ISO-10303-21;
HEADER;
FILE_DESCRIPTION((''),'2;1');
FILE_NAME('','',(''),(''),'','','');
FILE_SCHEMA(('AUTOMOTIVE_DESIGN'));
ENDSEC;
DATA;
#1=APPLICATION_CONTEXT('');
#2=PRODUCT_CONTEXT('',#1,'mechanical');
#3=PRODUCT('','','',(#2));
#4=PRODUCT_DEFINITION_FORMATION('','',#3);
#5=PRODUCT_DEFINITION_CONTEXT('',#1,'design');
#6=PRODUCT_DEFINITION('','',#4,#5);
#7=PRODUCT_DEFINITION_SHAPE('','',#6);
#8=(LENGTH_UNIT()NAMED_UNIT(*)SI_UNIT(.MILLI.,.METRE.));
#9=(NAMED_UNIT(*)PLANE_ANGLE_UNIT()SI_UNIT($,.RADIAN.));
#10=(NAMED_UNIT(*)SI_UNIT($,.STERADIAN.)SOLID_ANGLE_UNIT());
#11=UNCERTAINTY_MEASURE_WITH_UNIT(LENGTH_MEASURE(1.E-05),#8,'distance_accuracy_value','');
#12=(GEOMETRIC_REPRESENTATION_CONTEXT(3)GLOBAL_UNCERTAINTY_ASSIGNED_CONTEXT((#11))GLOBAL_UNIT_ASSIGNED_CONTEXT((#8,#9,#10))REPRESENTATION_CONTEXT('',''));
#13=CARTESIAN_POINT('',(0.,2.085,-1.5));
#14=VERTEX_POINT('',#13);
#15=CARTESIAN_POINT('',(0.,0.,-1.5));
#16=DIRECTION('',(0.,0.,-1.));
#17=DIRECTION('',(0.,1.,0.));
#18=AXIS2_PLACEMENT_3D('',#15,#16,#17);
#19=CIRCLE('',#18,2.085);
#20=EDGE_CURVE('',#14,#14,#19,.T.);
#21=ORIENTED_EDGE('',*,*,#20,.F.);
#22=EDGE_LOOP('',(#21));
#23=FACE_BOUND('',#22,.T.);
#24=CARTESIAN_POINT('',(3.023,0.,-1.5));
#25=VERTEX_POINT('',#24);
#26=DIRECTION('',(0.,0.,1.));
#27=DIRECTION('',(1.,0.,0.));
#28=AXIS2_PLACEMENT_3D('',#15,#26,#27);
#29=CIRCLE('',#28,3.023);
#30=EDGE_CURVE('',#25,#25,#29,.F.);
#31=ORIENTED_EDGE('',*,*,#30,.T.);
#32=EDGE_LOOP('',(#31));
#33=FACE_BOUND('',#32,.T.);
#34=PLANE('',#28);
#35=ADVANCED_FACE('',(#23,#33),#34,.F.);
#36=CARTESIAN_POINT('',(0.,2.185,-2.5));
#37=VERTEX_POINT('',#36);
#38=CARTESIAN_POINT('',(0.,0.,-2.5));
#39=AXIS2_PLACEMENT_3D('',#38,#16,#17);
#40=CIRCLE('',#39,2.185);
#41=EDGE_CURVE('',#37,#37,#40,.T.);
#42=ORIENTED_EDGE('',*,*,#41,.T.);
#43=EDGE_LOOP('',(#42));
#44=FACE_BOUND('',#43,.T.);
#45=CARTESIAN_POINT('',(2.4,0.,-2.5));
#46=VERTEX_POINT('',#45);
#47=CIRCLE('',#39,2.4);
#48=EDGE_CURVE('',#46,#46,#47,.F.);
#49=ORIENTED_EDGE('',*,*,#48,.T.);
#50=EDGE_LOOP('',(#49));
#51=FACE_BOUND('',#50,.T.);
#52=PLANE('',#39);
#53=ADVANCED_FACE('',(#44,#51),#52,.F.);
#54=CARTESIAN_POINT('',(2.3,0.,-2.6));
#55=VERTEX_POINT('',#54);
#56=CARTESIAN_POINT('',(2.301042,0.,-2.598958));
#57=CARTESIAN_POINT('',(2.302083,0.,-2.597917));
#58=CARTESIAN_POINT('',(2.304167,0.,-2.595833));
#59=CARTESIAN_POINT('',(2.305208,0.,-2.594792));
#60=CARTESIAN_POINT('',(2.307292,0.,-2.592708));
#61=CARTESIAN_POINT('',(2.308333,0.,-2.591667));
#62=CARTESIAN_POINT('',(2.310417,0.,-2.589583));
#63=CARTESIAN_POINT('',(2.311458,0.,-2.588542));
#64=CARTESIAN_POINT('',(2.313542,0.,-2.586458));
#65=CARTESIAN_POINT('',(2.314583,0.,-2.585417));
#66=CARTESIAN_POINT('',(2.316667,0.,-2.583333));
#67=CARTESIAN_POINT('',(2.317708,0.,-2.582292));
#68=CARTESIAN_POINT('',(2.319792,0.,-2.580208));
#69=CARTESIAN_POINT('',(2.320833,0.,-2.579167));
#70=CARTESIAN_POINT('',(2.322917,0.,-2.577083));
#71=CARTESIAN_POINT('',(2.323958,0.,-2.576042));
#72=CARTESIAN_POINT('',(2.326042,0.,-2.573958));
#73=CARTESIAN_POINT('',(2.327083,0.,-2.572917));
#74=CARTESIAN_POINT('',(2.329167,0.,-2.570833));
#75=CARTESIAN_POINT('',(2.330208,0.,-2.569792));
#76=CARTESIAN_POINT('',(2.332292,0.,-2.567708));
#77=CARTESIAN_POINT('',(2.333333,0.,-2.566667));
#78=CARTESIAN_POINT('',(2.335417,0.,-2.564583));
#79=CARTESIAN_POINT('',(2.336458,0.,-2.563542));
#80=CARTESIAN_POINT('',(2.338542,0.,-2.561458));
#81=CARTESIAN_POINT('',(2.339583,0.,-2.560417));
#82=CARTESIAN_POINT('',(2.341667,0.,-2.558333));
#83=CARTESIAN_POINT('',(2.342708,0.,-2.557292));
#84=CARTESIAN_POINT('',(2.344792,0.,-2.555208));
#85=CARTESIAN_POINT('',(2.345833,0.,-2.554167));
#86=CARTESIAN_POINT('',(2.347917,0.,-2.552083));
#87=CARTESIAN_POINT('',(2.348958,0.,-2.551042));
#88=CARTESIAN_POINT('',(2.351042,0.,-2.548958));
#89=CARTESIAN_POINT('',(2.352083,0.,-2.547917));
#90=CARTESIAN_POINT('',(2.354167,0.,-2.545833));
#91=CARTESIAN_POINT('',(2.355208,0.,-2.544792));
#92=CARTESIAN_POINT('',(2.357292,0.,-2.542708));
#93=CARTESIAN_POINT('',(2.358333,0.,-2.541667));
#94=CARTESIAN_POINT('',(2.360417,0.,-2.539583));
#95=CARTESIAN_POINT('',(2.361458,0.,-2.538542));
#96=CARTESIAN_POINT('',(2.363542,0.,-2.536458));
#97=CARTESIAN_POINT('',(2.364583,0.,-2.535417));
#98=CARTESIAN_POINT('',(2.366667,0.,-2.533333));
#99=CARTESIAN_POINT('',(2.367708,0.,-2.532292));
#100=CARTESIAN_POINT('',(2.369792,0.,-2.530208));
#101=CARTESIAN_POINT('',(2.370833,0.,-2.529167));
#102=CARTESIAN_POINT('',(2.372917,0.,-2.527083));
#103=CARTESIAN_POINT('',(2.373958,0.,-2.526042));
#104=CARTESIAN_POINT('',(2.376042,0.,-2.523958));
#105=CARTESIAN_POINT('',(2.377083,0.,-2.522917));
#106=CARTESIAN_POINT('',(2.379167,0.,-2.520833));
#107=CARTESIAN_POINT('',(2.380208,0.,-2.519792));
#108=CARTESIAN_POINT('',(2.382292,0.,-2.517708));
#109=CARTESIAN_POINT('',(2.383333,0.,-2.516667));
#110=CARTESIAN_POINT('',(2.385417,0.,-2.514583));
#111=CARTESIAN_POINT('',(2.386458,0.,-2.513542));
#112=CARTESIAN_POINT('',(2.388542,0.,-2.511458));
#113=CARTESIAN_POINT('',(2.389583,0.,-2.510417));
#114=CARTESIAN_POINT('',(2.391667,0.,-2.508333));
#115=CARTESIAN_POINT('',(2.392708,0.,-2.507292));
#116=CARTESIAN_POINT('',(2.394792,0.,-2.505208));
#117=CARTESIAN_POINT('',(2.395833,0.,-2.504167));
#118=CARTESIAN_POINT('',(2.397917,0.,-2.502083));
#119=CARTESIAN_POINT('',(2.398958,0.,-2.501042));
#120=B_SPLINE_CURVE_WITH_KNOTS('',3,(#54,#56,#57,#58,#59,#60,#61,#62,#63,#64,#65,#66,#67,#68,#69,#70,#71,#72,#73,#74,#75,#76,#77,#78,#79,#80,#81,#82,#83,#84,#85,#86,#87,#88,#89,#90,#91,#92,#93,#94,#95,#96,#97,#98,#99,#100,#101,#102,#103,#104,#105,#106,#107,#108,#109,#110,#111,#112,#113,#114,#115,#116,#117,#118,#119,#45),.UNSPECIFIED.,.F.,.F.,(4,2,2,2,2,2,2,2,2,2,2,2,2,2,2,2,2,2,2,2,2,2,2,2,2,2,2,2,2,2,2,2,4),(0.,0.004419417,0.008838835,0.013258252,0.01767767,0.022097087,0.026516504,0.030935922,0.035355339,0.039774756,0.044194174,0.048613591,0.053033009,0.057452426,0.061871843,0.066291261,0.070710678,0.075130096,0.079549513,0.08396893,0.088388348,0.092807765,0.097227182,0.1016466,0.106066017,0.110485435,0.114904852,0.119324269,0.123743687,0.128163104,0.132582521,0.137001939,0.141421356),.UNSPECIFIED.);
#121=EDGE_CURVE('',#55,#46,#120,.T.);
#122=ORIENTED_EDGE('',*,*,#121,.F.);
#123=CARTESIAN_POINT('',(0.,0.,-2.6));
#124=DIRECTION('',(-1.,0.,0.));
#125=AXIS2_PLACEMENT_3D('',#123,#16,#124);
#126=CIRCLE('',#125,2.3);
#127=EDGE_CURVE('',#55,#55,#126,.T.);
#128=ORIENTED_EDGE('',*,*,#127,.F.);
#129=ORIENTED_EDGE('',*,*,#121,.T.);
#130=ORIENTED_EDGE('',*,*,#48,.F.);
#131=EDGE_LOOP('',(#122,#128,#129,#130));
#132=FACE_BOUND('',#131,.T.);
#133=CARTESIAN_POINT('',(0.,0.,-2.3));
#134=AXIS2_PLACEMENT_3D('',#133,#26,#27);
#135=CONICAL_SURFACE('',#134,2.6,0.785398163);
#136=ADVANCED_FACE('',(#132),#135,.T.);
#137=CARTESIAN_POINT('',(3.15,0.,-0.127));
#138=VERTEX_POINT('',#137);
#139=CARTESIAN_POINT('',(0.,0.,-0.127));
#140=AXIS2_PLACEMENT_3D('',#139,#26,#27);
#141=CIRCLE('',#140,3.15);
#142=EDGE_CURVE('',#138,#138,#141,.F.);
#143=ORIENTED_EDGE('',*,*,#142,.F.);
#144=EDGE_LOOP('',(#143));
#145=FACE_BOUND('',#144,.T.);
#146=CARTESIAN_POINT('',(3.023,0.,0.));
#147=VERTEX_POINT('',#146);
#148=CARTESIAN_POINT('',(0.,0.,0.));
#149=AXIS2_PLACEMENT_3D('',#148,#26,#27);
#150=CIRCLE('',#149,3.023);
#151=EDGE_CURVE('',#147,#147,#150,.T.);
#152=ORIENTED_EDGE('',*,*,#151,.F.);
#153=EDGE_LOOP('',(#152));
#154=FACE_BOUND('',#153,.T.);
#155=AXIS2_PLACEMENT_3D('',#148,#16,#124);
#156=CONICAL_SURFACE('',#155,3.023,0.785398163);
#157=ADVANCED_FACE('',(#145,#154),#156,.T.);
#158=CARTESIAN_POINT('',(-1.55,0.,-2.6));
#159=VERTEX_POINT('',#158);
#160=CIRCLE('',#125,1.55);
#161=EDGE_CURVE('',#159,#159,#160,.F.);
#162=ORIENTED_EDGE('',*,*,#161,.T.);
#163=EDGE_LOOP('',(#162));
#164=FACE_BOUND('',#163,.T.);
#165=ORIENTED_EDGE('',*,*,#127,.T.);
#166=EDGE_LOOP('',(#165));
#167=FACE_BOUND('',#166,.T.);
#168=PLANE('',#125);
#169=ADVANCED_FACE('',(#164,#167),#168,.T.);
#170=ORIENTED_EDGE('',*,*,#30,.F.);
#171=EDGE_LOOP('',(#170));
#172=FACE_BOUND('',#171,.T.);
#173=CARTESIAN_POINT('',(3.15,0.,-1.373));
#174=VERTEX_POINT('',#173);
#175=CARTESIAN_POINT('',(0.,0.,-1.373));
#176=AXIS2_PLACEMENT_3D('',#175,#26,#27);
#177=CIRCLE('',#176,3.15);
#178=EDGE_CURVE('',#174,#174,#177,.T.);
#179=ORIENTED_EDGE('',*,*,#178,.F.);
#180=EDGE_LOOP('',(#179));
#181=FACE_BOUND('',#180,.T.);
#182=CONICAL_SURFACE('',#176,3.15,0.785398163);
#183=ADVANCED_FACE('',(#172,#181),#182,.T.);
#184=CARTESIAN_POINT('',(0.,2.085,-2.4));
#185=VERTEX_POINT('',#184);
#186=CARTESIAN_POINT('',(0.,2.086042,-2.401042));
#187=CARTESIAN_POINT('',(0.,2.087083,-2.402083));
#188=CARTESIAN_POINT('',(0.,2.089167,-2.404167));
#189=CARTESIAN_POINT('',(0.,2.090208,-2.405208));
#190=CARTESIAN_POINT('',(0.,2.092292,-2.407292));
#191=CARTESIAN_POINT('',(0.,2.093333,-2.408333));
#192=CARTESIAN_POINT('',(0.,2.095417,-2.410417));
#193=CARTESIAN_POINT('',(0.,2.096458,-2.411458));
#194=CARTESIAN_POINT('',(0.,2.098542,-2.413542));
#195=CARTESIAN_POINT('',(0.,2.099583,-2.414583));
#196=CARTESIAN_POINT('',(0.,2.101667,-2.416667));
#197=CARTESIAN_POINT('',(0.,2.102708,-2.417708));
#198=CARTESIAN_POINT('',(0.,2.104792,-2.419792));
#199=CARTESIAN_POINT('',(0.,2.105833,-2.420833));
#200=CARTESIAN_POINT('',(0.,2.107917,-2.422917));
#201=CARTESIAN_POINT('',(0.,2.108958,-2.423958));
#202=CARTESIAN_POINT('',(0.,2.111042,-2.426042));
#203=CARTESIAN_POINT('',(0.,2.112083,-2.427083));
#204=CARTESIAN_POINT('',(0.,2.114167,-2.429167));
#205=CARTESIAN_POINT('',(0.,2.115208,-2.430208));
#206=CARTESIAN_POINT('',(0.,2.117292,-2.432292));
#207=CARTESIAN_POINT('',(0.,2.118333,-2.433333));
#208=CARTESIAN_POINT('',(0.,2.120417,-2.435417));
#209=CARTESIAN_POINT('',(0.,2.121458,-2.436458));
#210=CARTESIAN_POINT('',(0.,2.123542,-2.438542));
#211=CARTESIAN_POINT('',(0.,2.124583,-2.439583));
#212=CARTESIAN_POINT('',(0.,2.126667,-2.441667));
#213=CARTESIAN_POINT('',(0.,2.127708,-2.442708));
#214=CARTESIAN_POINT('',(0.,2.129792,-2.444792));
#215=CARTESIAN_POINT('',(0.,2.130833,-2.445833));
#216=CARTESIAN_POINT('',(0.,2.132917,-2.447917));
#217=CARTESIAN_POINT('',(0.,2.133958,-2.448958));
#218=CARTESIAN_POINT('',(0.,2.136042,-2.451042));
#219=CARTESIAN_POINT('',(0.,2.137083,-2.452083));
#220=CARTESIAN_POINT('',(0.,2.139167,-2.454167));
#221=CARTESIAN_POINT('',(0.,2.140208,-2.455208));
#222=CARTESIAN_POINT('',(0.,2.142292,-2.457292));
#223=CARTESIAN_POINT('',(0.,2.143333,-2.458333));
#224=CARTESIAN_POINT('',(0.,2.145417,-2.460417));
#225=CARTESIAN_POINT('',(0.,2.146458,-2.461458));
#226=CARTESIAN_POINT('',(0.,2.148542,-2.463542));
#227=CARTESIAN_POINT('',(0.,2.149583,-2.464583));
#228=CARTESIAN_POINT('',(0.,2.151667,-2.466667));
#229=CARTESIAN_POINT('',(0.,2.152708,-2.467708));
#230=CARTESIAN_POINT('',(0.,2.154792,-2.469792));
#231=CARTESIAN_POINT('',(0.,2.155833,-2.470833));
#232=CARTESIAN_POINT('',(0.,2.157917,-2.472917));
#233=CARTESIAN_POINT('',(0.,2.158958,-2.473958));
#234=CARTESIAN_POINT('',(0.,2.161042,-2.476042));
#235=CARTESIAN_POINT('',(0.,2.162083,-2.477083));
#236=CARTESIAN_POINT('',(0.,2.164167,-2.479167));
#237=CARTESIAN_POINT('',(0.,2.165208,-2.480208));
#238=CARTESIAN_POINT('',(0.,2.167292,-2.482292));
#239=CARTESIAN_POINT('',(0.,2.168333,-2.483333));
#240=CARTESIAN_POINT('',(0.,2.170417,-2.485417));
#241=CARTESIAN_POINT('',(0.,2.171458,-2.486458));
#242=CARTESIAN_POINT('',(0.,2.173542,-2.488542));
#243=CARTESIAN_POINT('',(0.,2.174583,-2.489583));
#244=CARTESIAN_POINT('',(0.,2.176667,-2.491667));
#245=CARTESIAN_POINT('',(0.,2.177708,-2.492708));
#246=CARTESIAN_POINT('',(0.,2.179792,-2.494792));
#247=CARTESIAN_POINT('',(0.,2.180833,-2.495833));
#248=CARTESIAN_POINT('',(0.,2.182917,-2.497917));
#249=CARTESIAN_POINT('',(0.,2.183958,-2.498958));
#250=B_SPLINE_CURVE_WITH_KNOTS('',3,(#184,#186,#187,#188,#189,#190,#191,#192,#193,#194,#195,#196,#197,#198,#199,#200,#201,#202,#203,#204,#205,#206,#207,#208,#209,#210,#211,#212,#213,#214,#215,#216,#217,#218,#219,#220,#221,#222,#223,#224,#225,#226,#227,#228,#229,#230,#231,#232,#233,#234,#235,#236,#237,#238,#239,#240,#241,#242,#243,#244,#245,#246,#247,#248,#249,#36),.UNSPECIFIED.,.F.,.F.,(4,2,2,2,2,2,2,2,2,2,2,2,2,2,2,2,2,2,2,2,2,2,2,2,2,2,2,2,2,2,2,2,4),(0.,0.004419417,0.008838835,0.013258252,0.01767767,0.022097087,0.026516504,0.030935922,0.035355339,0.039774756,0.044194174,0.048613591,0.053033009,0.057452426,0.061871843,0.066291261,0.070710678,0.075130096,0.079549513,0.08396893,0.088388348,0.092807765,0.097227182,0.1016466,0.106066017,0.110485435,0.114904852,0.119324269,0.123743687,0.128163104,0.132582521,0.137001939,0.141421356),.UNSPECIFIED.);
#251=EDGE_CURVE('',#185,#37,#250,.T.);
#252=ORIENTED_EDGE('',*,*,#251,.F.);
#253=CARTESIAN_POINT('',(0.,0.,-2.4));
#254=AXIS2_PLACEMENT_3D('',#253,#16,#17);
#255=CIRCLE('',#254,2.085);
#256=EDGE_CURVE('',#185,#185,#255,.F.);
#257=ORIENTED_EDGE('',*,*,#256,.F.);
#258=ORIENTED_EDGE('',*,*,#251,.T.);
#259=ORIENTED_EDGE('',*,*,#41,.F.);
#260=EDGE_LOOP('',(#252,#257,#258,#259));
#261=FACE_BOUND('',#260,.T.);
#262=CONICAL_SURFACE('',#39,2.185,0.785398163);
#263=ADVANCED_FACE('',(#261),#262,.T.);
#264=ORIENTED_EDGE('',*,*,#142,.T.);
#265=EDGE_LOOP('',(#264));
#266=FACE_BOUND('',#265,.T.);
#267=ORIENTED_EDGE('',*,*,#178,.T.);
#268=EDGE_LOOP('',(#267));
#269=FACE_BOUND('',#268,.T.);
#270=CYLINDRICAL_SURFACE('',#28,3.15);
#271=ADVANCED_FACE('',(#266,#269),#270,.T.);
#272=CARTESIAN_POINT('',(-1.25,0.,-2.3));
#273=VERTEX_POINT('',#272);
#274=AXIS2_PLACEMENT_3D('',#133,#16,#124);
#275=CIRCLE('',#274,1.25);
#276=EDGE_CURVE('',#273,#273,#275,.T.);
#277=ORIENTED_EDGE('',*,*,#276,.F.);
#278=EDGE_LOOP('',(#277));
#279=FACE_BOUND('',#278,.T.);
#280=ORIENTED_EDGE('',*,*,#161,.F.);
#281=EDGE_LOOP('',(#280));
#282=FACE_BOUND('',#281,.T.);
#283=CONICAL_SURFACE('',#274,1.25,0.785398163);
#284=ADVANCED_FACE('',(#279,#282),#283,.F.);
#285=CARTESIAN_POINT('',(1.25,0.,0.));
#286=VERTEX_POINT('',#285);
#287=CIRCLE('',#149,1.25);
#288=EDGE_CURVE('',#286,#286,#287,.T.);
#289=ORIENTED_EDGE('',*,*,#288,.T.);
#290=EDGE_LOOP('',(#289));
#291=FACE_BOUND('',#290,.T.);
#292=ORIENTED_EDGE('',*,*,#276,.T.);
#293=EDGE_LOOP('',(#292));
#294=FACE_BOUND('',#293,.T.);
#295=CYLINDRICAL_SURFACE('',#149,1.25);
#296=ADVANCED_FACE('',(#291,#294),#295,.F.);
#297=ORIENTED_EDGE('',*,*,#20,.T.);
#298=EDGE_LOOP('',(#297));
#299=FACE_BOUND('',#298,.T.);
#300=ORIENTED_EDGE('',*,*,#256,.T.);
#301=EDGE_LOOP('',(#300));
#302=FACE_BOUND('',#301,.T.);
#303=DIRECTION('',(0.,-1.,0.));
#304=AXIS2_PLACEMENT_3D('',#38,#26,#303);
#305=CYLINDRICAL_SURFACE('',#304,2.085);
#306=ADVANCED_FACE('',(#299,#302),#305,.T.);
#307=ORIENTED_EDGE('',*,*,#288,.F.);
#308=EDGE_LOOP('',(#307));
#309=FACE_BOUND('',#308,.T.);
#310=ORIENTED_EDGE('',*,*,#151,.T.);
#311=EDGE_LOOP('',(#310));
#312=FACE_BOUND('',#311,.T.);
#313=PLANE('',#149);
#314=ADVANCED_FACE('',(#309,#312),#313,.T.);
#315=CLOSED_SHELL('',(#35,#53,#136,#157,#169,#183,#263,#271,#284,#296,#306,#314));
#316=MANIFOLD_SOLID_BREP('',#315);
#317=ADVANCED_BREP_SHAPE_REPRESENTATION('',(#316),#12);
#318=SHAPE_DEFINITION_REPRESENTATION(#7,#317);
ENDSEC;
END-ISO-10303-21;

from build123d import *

# Parameters (mm, degrees)
SKETCH1_R           = 3.15
EXTRUDE1_DEPTH      = 1.5
SKETCH2_R           = 2.2051
EXTRUDE2_DEPTH      = 1.1
CHAMFER2_SIZE       = 0.127
SKETCH_2_R          = 2.6
EXTRUDE_1_DEPTH     = 2.6
SKETCH_1_R          = 1.25
CUT_EXTRUDE_1_DEPTH = 10
SKETCH_3_R          = 2.75
SKETCH_3_R_2        = 2.085
CUT_EXTRUDE_2_DEPTH = 1
CHAMFER_2_SIZE      = 0.1
CHAMFER_3_SIZE      = 0.3
CHAMFER_4_SIZE      = 0.3
SKETCH_6_R          = 1.25
EXTRUDE_2_DEPTH     = 3.2
HOLE_WIZARD_M31_D   = 2.5


with BuildPart() as part:
    # Sketch1 → Extrude1 (new body)
    with BuildSketch(Plane.XY):
        Circle(SKETCH1_R)
    extrude(amount=-EXTRUDE1_DEPTH)

    # Sketch2 → Extrude2 (add)
    with BuildSketch(Plane(origin=(0, 0, -1.5), x_dir=(-1, 0, 0), z_dir=(0, 0, -1))):
        with Locations(Location((0, 0, 0), (0, 0, 180))):
            Circle(SKETCH2_R)
    extrude(amount=EXTRUDE2_DEPTH)

    # Chamfer2
    chamfer2_edges = [part.edges().sort_by_distance(p)[0] for p in [
        (-3.15, 0, 0),
        (-3.15, 0, -1.5),
    ]]
    chamfer(chamfer2_edges, length=CHAMFER2_SIZE)

    # Эскиз2 → Бобышка-Вытянуть1 (add)
    with BuildSketch(Plane.XY):
        Circle(SKETCH_2_R)
    extrude(amount=-EXTRUDE_1_DEPTH)

    # Эскиз1 → Вырез-Вытянуть1 (cut)
    with BuildSketch(Plane.XY):
        Circle(SKETCH_1_R)
    extrude(amount=-CUT_EXTRUDE_1_DEPTH, mode=Mode.SUBTRACT)

    # Эскиз3 → Вырез-Вытянуть2 (cut)
    with BuildSketch(Plane(origin=(0, 0, -1.5), x_dir=(-1, 0, 0), z_dir=(0, 0, -1))):
        Circle(SKETCH_3_R)
        with Locations(Location((0, 0, 0), (0, 0, 90))):
            Circle(SKETCH_3_R_2, mode=Mode.SUBTRACT)
    extrude(amount=CUT_EXTRUDE_2_DEPTH, mode=Mode.SUBTRACT)

    # Фаска2
    chamfer_2_edges = [part.edges().sort_by_distance(p)[0] for p in [
        (0, -2.085, -2.5),
    ]]
    chamfer(chamfer_2_edges, length=CHAMFER_2_SIZE)

    # Фаска3
    # the kernel refuses this chamfer: 0.3 mm, written as the material it takes off along each edge
    with BuildSketch(Plane(origin=(0, 0, -2.6), x_dir=(1, 0, 0), z_dir=(0, -1, 0))) as chamfer_3_piece_1:
        Polygon((2.6, CHAMFER_3_SIZE), (2.6 - CHAMFER_3_SIZE, 0), (2.6, 0), align=None)
    revolve(axis=Axis((0, 0, -2.6), (0, 0, 1)), mode=Mode.SUBTRACT)

    # Фаска4
    chamfer_4_edges = [part.edges().sort_by_distance(p)[0] for p in [
        (-1.25, 0, -2.6),
    ]]
    chamfer(chamfer_4_edges, length=CHAMFER_4_SIZE)

    # Эскиз6 → Бобышка-Вытянуть2 (add)
    with BuildSketch(Plane.XY):
        Circle(SKETCH_6_R)
    extrude(amount=-EXTRUDE_2_DEPTH)

    # Отверстие обработанное метчиком M31 (through all)
    with Locations(Plane.XY):
        with Locations((0, 0)):
            Hole(HOLE_WIZARD_M31_D / 2)


solid = part.part
